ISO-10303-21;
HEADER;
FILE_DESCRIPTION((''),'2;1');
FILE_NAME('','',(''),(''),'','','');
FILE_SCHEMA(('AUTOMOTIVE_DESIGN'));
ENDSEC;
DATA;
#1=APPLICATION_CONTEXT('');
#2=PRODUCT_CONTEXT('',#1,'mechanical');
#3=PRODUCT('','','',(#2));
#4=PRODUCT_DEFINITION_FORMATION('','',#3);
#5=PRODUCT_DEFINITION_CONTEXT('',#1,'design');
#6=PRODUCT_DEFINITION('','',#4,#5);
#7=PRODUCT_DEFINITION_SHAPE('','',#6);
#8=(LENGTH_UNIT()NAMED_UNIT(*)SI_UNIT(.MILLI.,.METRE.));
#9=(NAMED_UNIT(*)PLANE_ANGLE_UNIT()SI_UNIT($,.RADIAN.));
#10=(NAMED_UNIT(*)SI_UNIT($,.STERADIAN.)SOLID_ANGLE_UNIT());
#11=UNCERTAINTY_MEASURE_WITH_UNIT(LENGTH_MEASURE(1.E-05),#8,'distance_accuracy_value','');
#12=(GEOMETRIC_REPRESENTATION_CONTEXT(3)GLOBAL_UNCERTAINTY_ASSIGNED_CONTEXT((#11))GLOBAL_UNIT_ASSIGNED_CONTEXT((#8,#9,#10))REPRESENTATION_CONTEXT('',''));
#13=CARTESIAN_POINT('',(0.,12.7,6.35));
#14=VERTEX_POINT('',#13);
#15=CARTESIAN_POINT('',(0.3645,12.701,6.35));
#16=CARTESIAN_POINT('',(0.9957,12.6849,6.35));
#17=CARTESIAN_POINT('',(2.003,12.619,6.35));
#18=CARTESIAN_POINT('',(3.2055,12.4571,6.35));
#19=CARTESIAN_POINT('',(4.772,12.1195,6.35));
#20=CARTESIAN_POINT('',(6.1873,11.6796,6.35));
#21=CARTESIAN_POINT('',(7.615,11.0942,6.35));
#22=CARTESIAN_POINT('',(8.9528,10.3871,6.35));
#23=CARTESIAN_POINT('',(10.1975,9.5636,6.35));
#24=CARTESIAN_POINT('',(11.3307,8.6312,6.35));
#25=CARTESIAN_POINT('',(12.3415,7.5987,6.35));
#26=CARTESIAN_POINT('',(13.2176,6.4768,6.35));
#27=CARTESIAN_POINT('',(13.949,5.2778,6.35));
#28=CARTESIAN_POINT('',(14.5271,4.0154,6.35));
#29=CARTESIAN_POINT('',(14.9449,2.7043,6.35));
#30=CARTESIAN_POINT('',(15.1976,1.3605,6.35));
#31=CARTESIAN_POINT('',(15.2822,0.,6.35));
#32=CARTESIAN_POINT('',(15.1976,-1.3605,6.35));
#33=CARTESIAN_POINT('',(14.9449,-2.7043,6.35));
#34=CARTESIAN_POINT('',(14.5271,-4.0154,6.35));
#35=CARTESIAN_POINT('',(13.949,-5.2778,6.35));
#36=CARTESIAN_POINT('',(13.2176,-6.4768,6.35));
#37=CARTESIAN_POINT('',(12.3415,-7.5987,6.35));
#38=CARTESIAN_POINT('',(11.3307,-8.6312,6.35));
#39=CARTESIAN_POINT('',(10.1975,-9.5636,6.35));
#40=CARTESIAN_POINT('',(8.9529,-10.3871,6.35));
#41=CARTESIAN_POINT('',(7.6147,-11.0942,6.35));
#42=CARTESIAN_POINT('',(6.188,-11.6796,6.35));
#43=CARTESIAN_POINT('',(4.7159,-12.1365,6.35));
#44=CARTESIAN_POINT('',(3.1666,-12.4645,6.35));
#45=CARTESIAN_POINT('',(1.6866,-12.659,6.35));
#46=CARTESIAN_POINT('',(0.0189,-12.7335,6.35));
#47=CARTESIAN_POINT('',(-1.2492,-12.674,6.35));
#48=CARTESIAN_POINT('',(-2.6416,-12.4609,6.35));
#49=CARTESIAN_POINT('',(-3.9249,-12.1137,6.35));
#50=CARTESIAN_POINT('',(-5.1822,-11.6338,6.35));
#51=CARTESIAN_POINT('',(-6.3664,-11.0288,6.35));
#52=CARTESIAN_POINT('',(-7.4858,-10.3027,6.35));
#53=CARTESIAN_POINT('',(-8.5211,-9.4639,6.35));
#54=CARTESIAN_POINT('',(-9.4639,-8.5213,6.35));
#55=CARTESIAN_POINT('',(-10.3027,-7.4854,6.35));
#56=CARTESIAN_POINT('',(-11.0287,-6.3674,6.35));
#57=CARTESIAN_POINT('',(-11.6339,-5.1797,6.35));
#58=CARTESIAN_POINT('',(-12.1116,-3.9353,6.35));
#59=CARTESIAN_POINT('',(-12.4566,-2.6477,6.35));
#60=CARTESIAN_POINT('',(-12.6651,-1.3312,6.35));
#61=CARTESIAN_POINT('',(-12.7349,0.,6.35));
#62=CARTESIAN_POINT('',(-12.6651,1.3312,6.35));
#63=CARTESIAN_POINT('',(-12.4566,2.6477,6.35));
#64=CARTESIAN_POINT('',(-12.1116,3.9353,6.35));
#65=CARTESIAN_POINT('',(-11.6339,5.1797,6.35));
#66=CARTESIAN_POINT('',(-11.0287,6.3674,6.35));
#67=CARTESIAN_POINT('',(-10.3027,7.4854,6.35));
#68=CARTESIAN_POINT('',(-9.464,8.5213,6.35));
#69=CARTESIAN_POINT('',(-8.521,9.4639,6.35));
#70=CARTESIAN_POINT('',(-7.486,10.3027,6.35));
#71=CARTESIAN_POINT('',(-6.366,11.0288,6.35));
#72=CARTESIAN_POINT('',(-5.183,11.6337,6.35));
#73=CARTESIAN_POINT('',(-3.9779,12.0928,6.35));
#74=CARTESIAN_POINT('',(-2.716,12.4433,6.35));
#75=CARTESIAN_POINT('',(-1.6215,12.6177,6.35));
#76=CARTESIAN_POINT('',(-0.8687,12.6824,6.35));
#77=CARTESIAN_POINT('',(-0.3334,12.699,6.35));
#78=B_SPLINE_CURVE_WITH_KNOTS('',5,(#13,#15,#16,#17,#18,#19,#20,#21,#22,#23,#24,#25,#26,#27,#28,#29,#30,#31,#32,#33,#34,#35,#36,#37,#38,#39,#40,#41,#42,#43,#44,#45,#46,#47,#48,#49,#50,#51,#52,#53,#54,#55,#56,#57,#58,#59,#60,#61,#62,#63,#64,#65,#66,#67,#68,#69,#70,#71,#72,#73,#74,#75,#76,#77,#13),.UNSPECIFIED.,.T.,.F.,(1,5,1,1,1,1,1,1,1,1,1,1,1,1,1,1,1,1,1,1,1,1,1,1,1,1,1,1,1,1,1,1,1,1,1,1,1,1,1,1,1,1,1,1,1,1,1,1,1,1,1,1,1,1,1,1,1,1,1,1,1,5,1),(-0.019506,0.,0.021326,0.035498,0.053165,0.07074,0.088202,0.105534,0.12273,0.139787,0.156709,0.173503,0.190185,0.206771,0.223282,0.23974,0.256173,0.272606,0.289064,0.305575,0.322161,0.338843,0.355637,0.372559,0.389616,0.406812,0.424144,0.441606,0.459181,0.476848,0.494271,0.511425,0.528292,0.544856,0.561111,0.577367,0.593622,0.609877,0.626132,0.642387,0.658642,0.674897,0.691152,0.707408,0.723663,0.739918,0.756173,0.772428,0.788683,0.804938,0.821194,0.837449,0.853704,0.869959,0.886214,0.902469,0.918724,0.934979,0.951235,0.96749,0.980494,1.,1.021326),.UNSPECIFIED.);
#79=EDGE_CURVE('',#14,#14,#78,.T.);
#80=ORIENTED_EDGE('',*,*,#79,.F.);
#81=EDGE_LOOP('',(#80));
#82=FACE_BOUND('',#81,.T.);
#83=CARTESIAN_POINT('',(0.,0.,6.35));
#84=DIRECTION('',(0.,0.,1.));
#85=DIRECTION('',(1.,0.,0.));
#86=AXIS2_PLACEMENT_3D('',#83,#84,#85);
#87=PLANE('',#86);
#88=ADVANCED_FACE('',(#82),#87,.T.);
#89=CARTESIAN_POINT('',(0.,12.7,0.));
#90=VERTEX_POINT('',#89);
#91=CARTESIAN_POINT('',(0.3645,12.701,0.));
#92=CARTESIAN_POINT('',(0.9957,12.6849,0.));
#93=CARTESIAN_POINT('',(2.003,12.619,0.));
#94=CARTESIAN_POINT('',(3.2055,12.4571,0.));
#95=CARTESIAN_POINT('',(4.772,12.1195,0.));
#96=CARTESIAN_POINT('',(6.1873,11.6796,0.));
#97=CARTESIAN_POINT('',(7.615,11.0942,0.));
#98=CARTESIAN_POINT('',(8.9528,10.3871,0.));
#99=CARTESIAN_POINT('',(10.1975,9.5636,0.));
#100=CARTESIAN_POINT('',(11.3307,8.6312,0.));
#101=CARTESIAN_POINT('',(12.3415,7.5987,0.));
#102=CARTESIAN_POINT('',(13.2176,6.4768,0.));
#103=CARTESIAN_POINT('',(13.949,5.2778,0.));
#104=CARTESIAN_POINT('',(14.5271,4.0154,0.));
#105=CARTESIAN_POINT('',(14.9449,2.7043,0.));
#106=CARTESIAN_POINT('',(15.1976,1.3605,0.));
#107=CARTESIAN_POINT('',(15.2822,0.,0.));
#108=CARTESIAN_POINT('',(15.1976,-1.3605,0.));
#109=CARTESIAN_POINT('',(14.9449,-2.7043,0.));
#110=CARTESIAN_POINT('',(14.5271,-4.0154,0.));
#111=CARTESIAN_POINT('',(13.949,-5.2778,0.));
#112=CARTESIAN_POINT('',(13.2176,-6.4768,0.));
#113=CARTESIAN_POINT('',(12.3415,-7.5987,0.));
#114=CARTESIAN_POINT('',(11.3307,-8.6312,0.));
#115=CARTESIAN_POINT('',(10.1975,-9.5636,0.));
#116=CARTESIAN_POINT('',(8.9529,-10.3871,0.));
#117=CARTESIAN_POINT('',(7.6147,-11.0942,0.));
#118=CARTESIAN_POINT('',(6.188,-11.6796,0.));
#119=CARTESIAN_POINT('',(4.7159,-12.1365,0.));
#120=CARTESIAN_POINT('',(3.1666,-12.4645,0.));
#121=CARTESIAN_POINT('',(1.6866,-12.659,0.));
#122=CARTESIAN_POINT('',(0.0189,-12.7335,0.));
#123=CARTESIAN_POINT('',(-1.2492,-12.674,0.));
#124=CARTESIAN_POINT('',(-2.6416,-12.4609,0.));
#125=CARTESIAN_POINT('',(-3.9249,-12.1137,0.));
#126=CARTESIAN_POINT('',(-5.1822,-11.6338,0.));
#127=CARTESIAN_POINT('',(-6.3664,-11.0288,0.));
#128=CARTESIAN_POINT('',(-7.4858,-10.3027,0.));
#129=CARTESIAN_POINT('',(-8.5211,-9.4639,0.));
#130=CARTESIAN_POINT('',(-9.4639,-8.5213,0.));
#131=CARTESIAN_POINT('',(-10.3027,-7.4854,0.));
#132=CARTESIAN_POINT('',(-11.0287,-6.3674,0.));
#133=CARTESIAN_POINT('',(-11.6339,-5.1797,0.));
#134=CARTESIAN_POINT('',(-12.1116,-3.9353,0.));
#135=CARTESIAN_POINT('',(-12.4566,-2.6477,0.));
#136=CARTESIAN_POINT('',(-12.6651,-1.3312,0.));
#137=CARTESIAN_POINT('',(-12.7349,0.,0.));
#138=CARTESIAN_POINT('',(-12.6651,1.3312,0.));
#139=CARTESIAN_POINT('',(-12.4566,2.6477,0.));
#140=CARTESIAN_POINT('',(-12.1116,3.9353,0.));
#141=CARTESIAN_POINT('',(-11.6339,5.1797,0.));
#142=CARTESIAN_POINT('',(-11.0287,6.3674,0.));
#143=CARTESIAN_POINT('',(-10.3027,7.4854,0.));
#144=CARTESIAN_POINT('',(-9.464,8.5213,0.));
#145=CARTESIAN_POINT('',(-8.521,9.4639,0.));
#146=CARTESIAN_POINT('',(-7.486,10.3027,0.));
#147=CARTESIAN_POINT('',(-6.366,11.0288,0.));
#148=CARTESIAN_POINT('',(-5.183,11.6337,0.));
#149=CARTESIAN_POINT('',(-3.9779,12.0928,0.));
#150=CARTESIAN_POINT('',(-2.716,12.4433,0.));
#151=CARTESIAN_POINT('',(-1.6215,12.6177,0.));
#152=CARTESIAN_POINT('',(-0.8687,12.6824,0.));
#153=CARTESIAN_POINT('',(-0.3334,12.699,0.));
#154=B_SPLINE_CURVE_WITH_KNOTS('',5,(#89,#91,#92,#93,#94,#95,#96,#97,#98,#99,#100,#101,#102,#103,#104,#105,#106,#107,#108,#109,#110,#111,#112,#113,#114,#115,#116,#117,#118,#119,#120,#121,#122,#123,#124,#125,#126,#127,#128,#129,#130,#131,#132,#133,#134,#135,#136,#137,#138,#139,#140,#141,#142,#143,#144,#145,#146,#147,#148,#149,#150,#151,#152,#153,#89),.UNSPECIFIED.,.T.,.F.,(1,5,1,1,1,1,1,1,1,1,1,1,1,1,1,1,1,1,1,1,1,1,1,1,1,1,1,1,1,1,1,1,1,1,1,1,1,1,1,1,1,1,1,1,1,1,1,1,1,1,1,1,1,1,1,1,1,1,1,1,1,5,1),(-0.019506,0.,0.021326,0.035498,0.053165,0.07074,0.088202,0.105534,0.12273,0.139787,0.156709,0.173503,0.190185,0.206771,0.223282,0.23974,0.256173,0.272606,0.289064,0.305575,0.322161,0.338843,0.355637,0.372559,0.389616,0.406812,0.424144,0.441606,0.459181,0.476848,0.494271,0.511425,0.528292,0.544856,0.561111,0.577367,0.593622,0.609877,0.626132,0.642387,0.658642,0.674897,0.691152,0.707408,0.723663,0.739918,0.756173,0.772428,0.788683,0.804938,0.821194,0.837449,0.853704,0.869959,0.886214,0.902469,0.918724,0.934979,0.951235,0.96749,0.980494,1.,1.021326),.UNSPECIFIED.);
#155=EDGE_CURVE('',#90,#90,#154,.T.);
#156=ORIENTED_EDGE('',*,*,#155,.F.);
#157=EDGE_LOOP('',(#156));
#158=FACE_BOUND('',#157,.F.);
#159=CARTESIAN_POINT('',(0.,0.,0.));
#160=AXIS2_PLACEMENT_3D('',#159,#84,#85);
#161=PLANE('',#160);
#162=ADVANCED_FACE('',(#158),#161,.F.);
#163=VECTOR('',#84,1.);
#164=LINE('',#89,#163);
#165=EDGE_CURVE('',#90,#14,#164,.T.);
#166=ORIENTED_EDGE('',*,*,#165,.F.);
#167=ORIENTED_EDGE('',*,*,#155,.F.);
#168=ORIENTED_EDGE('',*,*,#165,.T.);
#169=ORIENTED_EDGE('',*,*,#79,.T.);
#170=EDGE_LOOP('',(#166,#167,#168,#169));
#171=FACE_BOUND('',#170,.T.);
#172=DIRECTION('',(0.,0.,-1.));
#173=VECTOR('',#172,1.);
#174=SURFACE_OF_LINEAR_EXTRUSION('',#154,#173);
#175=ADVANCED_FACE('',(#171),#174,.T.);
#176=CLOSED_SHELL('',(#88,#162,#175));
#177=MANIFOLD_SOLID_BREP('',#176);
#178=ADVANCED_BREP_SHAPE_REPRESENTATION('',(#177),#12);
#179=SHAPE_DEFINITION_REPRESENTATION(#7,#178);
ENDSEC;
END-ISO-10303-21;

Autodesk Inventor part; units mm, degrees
ref_plane "YZ Plane" through (0, 0, 0) normal (1, 0, 0) x (0, 1, 0)
ref_plane "XZ Plane" through (0, 0, 0) normal (0, 1, 0) x (-1, 0, 0)
ref_plane "XY Plane" through (0, 0, 0) normal (0, 0, 1) x (1, 0, 0)
sketch "Main Sketch" plane through (0, 0, 0) normal (0, 0, 1) x (1, 0, 0)
  spline S0 degree 5 poles (0, 12.7) (0.3645, 12.701) (0.9957, 12.6849) (2.003, 12.619) (3.2055, 12.4571) (4.772, 12.1195) (6.1873, 11.6796) (7.615, 11.0942) (8.9528, 10.3871) (10.1975, 9.5636) (11.3307, 8.6312) (12.3415, 7.5987) (13.2176, 6.4768) (13.949, 5.2778) (14.5271, 4.0154) (14.9449, 2.7043) (15.1976, 1.3605) (15.2822, 0) (15.1976, -1.3605) (14.9449, -2.7043) (14.5271, -4.0154) (13.949, -5.2778) (13.2176, -6.4768) (12.3415, -7.5987) (11.3307, -8.6312) (10.1975, -9.5636) (8.9529, -10.3871) (7.6147, -11.0942) (6.188, -11.6796) (4.7159, -12.1365) (3.1666, -12.4645) (1.6866, -12.659) (0.0189, -12.7335) (-1.2492, -12.674) (-2.6416, -12.4609) (-3.9249, -12.1137) (-5.1822, -11.6338) (-6.3664, -11.0288) (-7.4858, -10.3027) (-8.5211, -9.4639) (-9.4639, -8.5213) (-10.3027, -7.4854) (-11.0287, -6.3674) (-11.6339, -5.1797) (-12.1116, -3.9353) (-12.4566, -2.6477) (-12.6651, -1.3312) (-12.7349, 0) (-12.6651, 1.3312) (-12.4566, 2.6477) (-12.1116, 3.9353) (-11.6339, 5.1797) (-11.0287, 6.3674) (-10.3027, 7.4854) (-9.464, 8.5213) (-8.521, 9.4639) (-7.486, 10.3027) (-6.366, 11.0288) (-5.183, 11.6337) (-3.9779, 12.0928) (-2.716, 12.4433) (-1.6215, 12.6177) (-0.8687, 12.6824) (-0.3334, 12.699) (0, 12.7) knots 0 0 0 0 0 0 0.021326 0.035498 0.053165 0.07074 0.088202 0.105534 0.12273 0.139787 0.156709 0.173503 0.190185 0.206771 0.223282 0.23974 0.256173 0.272606 0.289064 0.305575 0.322161 0.338843 0.355637 0.372559 0.389616 0.406812 0.424144 0.441606 0.459181 0.476848 0.494271 0.511425 0.528292 0.544856 0.561111 0.577367 0.593622 0.609877 0.626132 0.642387 0.658642 0.674897 0.691152 0.707408 0.723663 0.739918 0.756173 0.772428 0.788683 0.804938 0.821194 0.837449 0.853704 0.869959 0.886214 0.902469 0.918724 0.934979 0.951235 0.96749 0.980494 1 1 1 1 1 1
  point P0 (3.1682, 12.4332)
  point P1 (4.7081, 12.1014)
  point P2 (6.1961, 11.6402)
  point P3 (7.616, 11.0529)
  point P4 (8.9526, 10.3442)
  point P5 (10.1915, 9.5203)
  point P6 (11.3194, 8.5885)
  point P7 (12.3239, 7.5581)
  point P8 (13.1937, 6.4398)
  point P9 (13.9192, 5.2459)
  point P10 (14.4922, 3.99)
  point P11 (14.9061, 2.6867)
  point P12 (15.1563, 1.3514)
  point P13 (15.24, 0)
  point P14 (15.1563, -1.3514)
  point P15 (14.9061, -2.6867)
  point P16 (14.4922, -3.99)
  point P17 (13.9192, -5.2459)
  point P18 (13.1937, -6.4398)
  point P19 (12.3239, -7.5581)
  point P20 (11.3194, -8.5885)
  point P21 (10.1915, -9.5203)
  point P22 (8.9526, -10.3442)
  point P23 (7.616, -11.0529)
  point P24 (6.1961, -11.6402)
  point P25 (4.7081, -12.1014)
  point P26 (3.1682, -12.4332)
  point P27 (1.593, -12.6332)
  point P28 (0, -12.7)
  point P29 (-1.3275, -12.6304)
  point P30 (-2.6405, -12.4225)
  point P31 (-3.9245, -12.0784)
  point P32 (-5.1656, -11.602)
  point P33 (-6.35, -10.9985)
  point P34 (-7.4649, -10.2745)
  point P35 (-8.498, -9.4379)
  point P36 (-9.4379, -8.498)
  point P37 (-10.2745, -7.4649)
  point P38 (-10.9985, -6.35)
  point P39 (-11.602, -5.1656)
  point P40 (-12.0784, -3.9245)
  point P41 (-12.4225, -2.6405)
  point P42 (-12.6304, -1.3275)
  point P43 (-12.7, 0)
  point P44 (-12.6304, 1.3275)
  point P45 (-12.4225, 2.6405)
  point P46 (-12.0784, 3.9245)
  point P47 (-11.602, 5.1656)
  point P48 (-10.9985, 6.35)
  point P49 (-10.2745, 7.4649)
  point P50 (-9.4379, 8.498)
  point P51 (-8.498, 9.4379)
  point P52 (-7.4649, 10.2745)
  point P53 (-6.35, 10.9985)
  point P54 (-5.1656, 11.602)
  point P55 (-3.9245, 12.0784)
  point P56 (-2.6405, 12.4225)
  point P57 (-1.3275, 12.6304)
extrude "Cam" add sketch "Main Sketch" along normal blind 6.35
properties part number "Disc Cam" material "Stainless Steel, Austenitic"
